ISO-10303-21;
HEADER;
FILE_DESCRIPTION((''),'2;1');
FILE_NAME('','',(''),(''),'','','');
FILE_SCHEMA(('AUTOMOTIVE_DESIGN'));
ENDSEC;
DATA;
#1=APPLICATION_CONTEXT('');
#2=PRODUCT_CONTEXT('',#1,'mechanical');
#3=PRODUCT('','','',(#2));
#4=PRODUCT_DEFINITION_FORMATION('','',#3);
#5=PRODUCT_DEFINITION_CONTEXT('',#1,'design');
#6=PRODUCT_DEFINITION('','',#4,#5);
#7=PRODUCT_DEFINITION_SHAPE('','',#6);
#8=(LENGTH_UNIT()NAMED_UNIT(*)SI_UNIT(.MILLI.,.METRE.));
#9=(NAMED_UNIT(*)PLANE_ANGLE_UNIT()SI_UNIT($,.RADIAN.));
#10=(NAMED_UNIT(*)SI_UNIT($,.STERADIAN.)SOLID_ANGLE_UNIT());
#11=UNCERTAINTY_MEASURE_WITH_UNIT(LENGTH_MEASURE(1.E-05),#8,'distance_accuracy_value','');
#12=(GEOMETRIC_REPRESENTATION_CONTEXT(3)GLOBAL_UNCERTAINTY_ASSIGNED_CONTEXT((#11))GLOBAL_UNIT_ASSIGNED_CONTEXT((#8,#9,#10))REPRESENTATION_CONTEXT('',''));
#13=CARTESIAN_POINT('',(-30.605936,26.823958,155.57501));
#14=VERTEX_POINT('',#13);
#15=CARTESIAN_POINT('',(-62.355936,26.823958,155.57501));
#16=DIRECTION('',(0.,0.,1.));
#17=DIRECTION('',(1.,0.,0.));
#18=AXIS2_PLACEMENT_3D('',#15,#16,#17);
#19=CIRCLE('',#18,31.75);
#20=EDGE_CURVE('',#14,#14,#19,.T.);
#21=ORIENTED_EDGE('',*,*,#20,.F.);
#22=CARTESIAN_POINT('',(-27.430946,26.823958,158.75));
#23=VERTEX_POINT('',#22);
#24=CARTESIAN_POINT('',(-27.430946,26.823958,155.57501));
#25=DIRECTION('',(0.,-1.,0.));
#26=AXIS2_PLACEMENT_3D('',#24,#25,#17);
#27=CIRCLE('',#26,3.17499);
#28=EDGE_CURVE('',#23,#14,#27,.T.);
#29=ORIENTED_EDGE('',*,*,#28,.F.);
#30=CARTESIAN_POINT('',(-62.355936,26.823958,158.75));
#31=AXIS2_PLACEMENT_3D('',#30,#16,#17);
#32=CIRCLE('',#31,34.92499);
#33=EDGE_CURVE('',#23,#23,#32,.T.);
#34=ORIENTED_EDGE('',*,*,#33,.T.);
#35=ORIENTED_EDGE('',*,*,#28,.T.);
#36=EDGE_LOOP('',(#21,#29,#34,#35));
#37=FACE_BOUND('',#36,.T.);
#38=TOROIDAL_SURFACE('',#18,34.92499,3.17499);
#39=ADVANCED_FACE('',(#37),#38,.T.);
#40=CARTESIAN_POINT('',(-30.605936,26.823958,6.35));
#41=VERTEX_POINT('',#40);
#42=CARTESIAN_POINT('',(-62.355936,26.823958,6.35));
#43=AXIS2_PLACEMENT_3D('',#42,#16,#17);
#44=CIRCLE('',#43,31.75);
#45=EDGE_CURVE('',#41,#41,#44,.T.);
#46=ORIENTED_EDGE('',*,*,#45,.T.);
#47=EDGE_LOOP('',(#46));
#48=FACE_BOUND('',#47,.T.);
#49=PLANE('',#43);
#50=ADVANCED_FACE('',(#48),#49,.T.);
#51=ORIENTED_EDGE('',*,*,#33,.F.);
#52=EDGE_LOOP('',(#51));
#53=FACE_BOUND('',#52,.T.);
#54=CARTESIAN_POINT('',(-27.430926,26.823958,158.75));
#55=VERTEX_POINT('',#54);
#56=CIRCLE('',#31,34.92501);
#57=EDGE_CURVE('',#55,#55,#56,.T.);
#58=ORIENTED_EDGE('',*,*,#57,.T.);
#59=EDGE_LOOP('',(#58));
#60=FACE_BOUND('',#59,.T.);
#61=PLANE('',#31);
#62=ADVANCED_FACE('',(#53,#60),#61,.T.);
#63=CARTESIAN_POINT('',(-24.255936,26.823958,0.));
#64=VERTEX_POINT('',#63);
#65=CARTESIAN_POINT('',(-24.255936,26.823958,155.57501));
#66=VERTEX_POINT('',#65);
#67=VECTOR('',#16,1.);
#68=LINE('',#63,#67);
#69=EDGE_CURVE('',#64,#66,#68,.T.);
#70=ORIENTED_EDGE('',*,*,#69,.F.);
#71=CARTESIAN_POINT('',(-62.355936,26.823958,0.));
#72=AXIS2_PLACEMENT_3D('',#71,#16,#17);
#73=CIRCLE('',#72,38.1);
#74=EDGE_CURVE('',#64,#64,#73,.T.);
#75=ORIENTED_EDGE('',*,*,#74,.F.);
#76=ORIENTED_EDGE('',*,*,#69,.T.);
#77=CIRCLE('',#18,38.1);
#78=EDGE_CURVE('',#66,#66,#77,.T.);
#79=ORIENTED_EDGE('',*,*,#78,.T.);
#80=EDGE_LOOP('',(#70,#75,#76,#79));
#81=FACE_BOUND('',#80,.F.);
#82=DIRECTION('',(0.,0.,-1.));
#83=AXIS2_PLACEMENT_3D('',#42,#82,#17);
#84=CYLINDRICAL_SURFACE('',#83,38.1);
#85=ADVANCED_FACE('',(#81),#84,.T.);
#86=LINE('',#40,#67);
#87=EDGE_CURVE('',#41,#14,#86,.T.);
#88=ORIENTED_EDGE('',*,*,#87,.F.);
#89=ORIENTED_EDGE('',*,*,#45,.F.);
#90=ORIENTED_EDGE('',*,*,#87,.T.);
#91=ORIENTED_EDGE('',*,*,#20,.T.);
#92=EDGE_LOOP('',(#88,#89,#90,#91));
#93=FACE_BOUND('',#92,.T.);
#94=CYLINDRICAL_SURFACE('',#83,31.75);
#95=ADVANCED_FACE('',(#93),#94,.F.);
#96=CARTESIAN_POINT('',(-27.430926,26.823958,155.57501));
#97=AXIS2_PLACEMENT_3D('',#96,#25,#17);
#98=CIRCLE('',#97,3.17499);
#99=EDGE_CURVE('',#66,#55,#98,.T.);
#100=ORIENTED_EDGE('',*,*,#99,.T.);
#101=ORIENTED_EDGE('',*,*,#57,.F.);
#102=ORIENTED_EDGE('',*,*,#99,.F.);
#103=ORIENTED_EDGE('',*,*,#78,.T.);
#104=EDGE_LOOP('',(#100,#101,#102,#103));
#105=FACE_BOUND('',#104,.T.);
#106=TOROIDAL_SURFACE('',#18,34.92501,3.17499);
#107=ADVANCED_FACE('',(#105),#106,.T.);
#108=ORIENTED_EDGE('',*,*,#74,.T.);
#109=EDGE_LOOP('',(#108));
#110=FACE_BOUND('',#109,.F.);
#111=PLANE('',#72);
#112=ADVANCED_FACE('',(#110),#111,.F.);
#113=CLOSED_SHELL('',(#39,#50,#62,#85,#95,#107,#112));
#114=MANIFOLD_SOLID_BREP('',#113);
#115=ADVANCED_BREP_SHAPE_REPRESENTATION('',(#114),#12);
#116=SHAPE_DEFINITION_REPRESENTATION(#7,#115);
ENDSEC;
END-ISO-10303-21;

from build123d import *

# Parameters (mm, degrees)
F0_R     = 38.1
F1_DEPTH = 6.35
F2_R     = 38.1
F2_R_2   = 31.75
F3_DEPTH = 152.4
F4_R     = 3.17499


# Not quite as in the source:
# - a fillet or chamfer is up to 0.001 mm smaller than in the source, because OpenCascade refuses the exact size


with BuildPart() as f1:
    # F0 (on Top) → F1 (new body)
    with BuildSketch(Plane.XY):
        with Locations((-62.3559355736, 26.823958382)):
            Circle(F0_R)
    extrude(amount=F1_DEPTH)

    # F2 (on face) → F3 (join)
    with BuildSketch(Plane.XY.offset(6.35)):
        with Locations((-62.3559355736, 26.823958382)):
            Circle(F2_R)
        with Locations((-62.3559355736, 26.823958382)):
            Circle(F2_R_2, mode=Mode.SUBTRACT)
    extrude(amount=F3_DEPTH)

    # F4 (radius 3.175 in the source; OpenCascade refuses exactly that, so slightly less here)
    f4_edges = [f1.edges().sort_by_distance(p)[0] for p in [
        (-94.105936, 26.823958, 158.75),
        (-100.455936, 26.823958, 158.75),
    ]]
    fillet(f4_edges, radius=F4_R)


solid = f1.part
